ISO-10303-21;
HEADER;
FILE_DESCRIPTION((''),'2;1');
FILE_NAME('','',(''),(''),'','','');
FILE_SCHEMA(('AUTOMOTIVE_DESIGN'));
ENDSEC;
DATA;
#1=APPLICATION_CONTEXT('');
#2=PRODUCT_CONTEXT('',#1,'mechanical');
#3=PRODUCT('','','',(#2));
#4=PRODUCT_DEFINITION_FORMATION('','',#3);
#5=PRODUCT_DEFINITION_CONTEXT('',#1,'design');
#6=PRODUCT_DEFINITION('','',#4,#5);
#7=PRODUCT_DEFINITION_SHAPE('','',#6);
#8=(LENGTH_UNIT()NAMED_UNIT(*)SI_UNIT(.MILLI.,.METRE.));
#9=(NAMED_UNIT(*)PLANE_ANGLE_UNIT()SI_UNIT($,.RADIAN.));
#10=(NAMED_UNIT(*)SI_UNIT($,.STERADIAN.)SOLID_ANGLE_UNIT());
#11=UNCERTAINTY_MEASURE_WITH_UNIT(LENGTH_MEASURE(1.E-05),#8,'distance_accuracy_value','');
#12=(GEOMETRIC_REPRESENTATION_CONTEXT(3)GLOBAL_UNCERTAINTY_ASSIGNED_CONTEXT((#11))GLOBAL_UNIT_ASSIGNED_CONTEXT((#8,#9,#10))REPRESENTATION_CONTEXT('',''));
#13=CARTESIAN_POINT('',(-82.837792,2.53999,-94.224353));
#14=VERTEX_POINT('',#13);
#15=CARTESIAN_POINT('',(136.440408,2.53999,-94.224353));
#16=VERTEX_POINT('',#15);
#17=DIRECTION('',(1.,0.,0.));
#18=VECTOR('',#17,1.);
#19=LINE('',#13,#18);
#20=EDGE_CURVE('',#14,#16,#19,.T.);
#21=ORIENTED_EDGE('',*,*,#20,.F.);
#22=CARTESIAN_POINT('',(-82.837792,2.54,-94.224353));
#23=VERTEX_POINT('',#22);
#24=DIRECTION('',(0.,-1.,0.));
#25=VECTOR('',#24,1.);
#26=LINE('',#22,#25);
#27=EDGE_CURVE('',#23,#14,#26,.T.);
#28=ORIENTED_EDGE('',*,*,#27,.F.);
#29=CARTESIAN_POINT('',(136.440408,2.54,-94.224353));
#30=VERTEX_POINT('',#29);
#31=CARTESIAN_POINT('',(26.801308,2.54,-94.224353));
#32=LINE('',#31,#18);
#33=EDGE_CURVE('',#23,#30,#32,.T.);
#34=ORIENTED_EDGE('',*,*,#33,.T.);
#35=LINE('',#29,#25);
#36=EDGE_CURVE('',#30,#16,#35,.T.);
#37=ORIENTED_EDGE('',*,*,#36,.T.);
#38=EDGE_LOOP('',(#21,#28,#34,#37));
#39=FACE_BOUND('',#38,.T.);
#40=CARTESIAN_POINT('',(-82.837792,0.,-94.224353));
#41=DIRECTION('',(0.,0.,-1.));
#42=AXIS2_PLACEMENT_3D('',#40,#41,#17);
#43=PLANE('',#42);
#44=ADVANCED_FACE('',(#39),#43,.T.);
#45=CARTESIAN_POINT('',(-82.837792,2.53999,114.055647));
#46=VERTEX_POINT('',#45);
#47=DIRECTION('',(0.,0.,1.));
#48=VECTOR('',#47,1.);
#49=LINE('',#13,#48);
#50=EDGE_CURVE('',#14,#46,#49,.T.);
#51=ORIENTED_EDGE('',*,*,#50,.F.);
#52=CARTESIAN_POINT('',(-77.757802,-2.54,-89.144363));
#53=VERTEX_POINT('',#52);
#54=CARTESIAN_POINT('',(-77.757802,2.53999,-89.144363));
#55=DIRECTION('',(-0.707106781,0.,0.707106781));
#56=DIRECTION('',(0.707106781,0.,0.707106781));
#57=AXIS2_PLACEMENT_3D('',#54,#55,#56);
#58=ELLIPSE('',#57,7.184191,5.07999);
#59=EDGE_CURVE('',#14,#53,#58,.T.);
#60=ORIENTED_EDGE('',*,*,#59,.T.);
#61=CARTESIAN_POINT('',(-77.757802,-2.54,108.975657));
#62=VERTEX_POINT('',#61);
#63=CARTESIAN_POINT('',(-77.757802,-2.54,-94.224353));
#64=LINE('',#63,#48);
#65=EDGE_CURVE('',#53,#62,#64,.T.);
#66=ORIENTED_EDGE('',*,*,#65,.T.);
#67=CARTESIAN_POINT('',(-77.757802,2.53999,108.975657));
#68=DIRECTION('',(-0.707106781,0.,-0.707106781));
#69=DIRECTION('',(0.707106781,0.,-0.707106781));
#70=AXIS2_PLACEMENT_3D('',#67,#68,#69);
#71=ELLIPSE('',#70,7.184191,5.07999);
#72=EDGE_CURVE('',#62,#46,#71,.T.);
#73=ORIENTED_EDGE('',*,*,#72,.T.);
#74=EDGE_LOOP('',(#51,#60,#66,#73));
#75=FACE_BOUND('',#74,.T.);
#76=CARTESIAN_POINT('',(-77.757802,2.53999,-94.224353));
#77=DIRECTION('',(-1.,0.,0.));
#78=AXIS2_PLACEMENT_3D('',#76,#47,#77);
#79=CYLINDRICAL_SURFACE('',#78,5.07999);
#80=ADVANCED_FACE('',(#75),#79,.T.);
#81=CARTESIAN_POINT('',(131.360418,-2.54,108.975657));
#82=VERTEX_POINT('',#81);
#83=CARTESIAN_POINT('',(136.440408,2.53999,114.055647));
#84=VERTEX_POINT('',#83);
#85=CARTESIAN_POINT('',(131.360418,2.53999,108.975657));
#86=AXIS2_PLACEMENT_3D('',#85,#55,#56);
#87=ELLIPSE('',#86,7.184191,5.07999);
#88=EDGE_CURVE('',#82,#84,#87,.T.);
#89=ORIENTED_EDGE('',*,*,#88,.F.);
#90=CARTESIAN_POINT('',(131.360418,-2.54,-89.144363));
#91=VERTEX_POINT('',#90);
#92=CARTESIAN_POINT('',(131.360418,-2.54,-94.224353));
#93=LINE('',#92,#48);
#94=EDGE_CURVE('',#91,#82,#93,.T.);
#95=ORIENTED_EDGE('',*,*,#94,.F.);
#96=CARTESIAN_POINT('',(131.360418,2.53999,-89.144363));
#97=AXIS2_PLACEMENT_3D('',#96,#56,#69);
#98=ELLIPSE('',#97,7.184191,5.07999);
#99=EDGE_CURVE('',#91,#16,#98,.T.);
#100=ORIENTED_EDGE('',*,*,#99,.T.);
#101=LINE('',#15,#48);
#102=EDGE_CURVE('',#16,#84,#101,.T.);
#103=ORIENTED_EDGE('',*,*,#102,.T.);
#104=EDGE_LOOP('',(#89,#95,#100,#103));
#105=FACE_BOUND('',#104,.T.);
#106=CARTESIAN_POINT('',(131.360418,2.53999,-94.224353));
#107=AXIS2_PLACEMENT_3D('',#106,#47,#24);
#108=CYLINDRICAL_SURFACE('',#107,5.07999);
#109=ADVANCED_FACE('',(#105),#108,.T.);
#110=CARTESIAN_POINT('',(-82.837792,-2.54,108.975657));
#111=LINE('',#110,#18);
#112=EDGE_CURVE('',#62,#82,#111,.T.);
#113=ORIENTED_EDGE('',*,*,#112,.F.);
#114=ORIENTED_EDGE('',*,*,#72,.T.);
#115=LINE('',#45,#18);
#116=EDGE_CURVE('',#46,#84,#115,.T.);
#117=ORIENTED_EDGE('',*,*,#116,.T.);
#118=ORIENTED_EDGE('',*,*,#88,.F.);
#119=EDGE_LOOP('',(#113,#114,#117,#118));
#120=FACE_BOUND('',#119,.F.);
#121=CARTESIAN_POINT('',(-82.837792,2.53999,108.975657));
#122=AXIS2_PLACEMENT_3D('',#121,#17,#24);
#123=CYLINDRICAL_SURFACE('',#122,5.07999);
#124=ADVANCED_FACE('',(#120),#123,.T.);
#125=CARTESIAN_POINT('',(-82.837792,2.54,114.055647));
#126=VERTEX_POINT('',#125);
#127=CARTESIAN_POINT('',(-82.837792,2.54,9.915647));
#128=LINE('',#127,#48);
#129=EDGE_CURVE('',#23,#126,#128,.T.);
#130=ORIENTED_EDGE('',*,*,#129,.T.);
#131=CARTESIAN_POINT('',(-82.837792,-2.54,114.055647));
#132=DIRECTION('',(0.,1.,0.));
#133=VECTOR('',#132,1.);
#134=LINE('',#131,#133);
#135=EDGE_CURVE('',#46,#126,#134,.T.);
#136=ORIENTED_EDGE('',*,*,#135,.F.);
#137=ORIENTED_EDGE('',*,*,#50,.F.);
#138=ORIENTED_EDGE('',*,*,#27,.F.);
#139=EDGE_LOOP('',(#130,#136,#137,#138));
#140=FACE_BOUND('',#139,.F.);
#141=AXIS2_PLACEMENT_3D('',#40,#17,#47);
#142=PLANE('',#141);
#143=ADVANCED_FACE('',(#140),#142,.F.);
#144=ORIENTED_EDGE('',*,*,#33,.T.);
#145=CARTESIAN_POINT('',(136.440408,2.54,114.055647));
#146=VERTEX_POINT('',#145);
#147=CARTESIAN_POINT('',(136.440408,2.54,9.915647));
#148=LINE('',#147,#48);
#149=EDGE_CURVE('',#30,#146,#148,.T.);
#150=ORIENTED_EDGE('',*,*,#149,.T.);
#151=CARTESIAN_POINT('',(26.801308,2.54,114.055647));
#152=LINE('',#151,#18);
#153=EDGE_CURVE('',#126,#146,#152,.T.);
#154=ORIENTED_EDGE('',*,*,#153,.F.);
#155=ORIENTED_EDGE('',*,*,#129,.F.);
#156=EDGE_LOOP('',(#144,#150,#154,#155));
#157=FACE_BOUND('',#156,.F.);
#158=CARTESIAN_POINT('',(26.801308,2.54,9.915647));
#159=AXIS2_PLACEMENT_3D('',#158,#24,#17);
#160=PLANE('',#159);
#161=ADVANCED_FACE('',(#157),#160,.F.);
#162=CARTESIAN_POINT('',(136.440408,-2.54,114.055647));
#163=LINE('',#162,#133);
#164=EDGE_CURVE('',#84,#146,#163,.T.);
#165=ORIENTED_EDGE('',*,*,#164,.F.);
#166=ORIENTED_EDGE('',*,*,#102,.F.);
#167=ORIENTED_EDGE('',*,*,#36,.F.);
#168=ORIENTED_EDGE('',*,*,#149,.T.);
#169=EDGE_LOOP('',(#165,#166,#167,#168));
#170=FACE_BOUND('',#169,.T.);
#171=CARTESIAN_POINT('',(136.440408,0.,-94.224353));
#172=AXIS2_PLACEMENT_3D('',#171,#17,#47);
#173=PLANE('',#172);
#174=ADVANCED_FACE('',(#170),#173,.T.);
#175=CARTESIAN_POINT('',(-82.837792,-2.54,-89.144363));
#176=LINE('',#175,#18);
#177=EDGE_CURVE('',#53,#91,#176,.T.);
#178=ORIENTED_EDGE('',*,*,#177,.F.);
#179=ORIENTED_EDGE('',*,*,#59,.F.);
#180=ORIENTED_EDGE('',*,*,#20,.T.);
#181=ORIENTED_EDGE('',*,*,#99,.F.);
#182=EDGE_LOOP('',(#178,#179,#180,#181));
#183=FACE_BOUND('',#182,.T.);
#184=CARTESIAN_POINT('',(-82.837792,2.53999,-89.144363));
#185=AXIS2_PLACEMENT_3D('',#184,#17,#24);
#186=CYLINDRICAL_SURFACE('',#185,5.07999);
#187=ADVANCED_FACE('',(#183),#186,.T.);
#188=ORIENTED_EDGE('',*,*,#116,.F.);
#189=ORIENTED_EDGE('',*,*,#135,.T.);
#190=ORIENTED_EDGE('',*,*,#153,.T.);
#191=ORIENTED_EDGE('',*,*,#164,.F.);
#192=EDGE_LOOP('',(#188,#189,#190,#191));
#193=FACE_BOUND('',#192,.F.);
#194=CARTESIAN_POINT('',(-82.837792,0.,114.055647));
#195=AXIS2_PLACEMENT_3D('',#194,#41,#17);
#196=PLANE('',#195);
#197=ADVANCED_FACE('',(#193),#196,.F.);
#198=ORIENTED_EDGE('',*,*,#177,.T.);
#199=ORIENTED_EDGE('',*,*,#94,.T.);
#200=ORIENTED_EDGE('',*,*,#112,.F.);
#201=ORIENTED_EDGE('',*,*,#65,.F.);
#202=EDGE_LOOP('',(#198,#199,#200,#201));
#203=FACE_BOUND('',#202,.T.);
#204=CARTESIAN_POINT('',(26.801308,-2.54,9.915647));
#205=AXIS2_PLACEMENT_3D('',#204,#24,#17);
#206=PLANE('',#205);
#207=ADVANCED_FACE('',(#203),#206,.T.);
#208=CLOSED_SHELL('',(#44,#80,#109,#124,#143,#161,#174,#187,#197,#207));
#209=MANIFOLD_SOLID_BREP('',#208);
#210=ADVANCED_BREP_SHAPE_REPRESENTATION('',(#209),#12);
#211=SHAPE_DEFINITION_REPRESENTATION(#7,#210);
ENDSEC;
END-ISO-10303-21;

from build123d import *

# Parameters (mm, degrees)
F0_W     = 219.2782
F0_H     = 208.28
F1_DEPTH = 2.54
F2_R     = 5.07999


# Not quite as in the source:
# - a fillet or chamfer is up to 0.001 mm smaller than in the source, because OpenCascade refuses the exact size


with BuildPart() as f1:
    # F0 (on Front) → F1 (new body, symmetric)
    with BuildSketch(Plane.XZ):
        with Locations((26.8013083044, 9.9156468416)):
            Rectangle(F0_W, F0_H)
    extrude(amount=F1_DEPTH, both=True)

    # F2 (radius 5.08 in the source; OpenCascade refuses exactly that, so slightly less here)
    f2_edges = [f1.edges().sort_by_distance(p)[0] for p in [
        (26.801308, -2.54, 114.055647),
        (-82.837792, -2.54, 9.915647),
        (26.801308, -2.54, -94.224353),
        (136.440408, -2.54, 9.915647),
    ]]
    fillet(f2_edges, radius=F2_R)


solid = f1.part
